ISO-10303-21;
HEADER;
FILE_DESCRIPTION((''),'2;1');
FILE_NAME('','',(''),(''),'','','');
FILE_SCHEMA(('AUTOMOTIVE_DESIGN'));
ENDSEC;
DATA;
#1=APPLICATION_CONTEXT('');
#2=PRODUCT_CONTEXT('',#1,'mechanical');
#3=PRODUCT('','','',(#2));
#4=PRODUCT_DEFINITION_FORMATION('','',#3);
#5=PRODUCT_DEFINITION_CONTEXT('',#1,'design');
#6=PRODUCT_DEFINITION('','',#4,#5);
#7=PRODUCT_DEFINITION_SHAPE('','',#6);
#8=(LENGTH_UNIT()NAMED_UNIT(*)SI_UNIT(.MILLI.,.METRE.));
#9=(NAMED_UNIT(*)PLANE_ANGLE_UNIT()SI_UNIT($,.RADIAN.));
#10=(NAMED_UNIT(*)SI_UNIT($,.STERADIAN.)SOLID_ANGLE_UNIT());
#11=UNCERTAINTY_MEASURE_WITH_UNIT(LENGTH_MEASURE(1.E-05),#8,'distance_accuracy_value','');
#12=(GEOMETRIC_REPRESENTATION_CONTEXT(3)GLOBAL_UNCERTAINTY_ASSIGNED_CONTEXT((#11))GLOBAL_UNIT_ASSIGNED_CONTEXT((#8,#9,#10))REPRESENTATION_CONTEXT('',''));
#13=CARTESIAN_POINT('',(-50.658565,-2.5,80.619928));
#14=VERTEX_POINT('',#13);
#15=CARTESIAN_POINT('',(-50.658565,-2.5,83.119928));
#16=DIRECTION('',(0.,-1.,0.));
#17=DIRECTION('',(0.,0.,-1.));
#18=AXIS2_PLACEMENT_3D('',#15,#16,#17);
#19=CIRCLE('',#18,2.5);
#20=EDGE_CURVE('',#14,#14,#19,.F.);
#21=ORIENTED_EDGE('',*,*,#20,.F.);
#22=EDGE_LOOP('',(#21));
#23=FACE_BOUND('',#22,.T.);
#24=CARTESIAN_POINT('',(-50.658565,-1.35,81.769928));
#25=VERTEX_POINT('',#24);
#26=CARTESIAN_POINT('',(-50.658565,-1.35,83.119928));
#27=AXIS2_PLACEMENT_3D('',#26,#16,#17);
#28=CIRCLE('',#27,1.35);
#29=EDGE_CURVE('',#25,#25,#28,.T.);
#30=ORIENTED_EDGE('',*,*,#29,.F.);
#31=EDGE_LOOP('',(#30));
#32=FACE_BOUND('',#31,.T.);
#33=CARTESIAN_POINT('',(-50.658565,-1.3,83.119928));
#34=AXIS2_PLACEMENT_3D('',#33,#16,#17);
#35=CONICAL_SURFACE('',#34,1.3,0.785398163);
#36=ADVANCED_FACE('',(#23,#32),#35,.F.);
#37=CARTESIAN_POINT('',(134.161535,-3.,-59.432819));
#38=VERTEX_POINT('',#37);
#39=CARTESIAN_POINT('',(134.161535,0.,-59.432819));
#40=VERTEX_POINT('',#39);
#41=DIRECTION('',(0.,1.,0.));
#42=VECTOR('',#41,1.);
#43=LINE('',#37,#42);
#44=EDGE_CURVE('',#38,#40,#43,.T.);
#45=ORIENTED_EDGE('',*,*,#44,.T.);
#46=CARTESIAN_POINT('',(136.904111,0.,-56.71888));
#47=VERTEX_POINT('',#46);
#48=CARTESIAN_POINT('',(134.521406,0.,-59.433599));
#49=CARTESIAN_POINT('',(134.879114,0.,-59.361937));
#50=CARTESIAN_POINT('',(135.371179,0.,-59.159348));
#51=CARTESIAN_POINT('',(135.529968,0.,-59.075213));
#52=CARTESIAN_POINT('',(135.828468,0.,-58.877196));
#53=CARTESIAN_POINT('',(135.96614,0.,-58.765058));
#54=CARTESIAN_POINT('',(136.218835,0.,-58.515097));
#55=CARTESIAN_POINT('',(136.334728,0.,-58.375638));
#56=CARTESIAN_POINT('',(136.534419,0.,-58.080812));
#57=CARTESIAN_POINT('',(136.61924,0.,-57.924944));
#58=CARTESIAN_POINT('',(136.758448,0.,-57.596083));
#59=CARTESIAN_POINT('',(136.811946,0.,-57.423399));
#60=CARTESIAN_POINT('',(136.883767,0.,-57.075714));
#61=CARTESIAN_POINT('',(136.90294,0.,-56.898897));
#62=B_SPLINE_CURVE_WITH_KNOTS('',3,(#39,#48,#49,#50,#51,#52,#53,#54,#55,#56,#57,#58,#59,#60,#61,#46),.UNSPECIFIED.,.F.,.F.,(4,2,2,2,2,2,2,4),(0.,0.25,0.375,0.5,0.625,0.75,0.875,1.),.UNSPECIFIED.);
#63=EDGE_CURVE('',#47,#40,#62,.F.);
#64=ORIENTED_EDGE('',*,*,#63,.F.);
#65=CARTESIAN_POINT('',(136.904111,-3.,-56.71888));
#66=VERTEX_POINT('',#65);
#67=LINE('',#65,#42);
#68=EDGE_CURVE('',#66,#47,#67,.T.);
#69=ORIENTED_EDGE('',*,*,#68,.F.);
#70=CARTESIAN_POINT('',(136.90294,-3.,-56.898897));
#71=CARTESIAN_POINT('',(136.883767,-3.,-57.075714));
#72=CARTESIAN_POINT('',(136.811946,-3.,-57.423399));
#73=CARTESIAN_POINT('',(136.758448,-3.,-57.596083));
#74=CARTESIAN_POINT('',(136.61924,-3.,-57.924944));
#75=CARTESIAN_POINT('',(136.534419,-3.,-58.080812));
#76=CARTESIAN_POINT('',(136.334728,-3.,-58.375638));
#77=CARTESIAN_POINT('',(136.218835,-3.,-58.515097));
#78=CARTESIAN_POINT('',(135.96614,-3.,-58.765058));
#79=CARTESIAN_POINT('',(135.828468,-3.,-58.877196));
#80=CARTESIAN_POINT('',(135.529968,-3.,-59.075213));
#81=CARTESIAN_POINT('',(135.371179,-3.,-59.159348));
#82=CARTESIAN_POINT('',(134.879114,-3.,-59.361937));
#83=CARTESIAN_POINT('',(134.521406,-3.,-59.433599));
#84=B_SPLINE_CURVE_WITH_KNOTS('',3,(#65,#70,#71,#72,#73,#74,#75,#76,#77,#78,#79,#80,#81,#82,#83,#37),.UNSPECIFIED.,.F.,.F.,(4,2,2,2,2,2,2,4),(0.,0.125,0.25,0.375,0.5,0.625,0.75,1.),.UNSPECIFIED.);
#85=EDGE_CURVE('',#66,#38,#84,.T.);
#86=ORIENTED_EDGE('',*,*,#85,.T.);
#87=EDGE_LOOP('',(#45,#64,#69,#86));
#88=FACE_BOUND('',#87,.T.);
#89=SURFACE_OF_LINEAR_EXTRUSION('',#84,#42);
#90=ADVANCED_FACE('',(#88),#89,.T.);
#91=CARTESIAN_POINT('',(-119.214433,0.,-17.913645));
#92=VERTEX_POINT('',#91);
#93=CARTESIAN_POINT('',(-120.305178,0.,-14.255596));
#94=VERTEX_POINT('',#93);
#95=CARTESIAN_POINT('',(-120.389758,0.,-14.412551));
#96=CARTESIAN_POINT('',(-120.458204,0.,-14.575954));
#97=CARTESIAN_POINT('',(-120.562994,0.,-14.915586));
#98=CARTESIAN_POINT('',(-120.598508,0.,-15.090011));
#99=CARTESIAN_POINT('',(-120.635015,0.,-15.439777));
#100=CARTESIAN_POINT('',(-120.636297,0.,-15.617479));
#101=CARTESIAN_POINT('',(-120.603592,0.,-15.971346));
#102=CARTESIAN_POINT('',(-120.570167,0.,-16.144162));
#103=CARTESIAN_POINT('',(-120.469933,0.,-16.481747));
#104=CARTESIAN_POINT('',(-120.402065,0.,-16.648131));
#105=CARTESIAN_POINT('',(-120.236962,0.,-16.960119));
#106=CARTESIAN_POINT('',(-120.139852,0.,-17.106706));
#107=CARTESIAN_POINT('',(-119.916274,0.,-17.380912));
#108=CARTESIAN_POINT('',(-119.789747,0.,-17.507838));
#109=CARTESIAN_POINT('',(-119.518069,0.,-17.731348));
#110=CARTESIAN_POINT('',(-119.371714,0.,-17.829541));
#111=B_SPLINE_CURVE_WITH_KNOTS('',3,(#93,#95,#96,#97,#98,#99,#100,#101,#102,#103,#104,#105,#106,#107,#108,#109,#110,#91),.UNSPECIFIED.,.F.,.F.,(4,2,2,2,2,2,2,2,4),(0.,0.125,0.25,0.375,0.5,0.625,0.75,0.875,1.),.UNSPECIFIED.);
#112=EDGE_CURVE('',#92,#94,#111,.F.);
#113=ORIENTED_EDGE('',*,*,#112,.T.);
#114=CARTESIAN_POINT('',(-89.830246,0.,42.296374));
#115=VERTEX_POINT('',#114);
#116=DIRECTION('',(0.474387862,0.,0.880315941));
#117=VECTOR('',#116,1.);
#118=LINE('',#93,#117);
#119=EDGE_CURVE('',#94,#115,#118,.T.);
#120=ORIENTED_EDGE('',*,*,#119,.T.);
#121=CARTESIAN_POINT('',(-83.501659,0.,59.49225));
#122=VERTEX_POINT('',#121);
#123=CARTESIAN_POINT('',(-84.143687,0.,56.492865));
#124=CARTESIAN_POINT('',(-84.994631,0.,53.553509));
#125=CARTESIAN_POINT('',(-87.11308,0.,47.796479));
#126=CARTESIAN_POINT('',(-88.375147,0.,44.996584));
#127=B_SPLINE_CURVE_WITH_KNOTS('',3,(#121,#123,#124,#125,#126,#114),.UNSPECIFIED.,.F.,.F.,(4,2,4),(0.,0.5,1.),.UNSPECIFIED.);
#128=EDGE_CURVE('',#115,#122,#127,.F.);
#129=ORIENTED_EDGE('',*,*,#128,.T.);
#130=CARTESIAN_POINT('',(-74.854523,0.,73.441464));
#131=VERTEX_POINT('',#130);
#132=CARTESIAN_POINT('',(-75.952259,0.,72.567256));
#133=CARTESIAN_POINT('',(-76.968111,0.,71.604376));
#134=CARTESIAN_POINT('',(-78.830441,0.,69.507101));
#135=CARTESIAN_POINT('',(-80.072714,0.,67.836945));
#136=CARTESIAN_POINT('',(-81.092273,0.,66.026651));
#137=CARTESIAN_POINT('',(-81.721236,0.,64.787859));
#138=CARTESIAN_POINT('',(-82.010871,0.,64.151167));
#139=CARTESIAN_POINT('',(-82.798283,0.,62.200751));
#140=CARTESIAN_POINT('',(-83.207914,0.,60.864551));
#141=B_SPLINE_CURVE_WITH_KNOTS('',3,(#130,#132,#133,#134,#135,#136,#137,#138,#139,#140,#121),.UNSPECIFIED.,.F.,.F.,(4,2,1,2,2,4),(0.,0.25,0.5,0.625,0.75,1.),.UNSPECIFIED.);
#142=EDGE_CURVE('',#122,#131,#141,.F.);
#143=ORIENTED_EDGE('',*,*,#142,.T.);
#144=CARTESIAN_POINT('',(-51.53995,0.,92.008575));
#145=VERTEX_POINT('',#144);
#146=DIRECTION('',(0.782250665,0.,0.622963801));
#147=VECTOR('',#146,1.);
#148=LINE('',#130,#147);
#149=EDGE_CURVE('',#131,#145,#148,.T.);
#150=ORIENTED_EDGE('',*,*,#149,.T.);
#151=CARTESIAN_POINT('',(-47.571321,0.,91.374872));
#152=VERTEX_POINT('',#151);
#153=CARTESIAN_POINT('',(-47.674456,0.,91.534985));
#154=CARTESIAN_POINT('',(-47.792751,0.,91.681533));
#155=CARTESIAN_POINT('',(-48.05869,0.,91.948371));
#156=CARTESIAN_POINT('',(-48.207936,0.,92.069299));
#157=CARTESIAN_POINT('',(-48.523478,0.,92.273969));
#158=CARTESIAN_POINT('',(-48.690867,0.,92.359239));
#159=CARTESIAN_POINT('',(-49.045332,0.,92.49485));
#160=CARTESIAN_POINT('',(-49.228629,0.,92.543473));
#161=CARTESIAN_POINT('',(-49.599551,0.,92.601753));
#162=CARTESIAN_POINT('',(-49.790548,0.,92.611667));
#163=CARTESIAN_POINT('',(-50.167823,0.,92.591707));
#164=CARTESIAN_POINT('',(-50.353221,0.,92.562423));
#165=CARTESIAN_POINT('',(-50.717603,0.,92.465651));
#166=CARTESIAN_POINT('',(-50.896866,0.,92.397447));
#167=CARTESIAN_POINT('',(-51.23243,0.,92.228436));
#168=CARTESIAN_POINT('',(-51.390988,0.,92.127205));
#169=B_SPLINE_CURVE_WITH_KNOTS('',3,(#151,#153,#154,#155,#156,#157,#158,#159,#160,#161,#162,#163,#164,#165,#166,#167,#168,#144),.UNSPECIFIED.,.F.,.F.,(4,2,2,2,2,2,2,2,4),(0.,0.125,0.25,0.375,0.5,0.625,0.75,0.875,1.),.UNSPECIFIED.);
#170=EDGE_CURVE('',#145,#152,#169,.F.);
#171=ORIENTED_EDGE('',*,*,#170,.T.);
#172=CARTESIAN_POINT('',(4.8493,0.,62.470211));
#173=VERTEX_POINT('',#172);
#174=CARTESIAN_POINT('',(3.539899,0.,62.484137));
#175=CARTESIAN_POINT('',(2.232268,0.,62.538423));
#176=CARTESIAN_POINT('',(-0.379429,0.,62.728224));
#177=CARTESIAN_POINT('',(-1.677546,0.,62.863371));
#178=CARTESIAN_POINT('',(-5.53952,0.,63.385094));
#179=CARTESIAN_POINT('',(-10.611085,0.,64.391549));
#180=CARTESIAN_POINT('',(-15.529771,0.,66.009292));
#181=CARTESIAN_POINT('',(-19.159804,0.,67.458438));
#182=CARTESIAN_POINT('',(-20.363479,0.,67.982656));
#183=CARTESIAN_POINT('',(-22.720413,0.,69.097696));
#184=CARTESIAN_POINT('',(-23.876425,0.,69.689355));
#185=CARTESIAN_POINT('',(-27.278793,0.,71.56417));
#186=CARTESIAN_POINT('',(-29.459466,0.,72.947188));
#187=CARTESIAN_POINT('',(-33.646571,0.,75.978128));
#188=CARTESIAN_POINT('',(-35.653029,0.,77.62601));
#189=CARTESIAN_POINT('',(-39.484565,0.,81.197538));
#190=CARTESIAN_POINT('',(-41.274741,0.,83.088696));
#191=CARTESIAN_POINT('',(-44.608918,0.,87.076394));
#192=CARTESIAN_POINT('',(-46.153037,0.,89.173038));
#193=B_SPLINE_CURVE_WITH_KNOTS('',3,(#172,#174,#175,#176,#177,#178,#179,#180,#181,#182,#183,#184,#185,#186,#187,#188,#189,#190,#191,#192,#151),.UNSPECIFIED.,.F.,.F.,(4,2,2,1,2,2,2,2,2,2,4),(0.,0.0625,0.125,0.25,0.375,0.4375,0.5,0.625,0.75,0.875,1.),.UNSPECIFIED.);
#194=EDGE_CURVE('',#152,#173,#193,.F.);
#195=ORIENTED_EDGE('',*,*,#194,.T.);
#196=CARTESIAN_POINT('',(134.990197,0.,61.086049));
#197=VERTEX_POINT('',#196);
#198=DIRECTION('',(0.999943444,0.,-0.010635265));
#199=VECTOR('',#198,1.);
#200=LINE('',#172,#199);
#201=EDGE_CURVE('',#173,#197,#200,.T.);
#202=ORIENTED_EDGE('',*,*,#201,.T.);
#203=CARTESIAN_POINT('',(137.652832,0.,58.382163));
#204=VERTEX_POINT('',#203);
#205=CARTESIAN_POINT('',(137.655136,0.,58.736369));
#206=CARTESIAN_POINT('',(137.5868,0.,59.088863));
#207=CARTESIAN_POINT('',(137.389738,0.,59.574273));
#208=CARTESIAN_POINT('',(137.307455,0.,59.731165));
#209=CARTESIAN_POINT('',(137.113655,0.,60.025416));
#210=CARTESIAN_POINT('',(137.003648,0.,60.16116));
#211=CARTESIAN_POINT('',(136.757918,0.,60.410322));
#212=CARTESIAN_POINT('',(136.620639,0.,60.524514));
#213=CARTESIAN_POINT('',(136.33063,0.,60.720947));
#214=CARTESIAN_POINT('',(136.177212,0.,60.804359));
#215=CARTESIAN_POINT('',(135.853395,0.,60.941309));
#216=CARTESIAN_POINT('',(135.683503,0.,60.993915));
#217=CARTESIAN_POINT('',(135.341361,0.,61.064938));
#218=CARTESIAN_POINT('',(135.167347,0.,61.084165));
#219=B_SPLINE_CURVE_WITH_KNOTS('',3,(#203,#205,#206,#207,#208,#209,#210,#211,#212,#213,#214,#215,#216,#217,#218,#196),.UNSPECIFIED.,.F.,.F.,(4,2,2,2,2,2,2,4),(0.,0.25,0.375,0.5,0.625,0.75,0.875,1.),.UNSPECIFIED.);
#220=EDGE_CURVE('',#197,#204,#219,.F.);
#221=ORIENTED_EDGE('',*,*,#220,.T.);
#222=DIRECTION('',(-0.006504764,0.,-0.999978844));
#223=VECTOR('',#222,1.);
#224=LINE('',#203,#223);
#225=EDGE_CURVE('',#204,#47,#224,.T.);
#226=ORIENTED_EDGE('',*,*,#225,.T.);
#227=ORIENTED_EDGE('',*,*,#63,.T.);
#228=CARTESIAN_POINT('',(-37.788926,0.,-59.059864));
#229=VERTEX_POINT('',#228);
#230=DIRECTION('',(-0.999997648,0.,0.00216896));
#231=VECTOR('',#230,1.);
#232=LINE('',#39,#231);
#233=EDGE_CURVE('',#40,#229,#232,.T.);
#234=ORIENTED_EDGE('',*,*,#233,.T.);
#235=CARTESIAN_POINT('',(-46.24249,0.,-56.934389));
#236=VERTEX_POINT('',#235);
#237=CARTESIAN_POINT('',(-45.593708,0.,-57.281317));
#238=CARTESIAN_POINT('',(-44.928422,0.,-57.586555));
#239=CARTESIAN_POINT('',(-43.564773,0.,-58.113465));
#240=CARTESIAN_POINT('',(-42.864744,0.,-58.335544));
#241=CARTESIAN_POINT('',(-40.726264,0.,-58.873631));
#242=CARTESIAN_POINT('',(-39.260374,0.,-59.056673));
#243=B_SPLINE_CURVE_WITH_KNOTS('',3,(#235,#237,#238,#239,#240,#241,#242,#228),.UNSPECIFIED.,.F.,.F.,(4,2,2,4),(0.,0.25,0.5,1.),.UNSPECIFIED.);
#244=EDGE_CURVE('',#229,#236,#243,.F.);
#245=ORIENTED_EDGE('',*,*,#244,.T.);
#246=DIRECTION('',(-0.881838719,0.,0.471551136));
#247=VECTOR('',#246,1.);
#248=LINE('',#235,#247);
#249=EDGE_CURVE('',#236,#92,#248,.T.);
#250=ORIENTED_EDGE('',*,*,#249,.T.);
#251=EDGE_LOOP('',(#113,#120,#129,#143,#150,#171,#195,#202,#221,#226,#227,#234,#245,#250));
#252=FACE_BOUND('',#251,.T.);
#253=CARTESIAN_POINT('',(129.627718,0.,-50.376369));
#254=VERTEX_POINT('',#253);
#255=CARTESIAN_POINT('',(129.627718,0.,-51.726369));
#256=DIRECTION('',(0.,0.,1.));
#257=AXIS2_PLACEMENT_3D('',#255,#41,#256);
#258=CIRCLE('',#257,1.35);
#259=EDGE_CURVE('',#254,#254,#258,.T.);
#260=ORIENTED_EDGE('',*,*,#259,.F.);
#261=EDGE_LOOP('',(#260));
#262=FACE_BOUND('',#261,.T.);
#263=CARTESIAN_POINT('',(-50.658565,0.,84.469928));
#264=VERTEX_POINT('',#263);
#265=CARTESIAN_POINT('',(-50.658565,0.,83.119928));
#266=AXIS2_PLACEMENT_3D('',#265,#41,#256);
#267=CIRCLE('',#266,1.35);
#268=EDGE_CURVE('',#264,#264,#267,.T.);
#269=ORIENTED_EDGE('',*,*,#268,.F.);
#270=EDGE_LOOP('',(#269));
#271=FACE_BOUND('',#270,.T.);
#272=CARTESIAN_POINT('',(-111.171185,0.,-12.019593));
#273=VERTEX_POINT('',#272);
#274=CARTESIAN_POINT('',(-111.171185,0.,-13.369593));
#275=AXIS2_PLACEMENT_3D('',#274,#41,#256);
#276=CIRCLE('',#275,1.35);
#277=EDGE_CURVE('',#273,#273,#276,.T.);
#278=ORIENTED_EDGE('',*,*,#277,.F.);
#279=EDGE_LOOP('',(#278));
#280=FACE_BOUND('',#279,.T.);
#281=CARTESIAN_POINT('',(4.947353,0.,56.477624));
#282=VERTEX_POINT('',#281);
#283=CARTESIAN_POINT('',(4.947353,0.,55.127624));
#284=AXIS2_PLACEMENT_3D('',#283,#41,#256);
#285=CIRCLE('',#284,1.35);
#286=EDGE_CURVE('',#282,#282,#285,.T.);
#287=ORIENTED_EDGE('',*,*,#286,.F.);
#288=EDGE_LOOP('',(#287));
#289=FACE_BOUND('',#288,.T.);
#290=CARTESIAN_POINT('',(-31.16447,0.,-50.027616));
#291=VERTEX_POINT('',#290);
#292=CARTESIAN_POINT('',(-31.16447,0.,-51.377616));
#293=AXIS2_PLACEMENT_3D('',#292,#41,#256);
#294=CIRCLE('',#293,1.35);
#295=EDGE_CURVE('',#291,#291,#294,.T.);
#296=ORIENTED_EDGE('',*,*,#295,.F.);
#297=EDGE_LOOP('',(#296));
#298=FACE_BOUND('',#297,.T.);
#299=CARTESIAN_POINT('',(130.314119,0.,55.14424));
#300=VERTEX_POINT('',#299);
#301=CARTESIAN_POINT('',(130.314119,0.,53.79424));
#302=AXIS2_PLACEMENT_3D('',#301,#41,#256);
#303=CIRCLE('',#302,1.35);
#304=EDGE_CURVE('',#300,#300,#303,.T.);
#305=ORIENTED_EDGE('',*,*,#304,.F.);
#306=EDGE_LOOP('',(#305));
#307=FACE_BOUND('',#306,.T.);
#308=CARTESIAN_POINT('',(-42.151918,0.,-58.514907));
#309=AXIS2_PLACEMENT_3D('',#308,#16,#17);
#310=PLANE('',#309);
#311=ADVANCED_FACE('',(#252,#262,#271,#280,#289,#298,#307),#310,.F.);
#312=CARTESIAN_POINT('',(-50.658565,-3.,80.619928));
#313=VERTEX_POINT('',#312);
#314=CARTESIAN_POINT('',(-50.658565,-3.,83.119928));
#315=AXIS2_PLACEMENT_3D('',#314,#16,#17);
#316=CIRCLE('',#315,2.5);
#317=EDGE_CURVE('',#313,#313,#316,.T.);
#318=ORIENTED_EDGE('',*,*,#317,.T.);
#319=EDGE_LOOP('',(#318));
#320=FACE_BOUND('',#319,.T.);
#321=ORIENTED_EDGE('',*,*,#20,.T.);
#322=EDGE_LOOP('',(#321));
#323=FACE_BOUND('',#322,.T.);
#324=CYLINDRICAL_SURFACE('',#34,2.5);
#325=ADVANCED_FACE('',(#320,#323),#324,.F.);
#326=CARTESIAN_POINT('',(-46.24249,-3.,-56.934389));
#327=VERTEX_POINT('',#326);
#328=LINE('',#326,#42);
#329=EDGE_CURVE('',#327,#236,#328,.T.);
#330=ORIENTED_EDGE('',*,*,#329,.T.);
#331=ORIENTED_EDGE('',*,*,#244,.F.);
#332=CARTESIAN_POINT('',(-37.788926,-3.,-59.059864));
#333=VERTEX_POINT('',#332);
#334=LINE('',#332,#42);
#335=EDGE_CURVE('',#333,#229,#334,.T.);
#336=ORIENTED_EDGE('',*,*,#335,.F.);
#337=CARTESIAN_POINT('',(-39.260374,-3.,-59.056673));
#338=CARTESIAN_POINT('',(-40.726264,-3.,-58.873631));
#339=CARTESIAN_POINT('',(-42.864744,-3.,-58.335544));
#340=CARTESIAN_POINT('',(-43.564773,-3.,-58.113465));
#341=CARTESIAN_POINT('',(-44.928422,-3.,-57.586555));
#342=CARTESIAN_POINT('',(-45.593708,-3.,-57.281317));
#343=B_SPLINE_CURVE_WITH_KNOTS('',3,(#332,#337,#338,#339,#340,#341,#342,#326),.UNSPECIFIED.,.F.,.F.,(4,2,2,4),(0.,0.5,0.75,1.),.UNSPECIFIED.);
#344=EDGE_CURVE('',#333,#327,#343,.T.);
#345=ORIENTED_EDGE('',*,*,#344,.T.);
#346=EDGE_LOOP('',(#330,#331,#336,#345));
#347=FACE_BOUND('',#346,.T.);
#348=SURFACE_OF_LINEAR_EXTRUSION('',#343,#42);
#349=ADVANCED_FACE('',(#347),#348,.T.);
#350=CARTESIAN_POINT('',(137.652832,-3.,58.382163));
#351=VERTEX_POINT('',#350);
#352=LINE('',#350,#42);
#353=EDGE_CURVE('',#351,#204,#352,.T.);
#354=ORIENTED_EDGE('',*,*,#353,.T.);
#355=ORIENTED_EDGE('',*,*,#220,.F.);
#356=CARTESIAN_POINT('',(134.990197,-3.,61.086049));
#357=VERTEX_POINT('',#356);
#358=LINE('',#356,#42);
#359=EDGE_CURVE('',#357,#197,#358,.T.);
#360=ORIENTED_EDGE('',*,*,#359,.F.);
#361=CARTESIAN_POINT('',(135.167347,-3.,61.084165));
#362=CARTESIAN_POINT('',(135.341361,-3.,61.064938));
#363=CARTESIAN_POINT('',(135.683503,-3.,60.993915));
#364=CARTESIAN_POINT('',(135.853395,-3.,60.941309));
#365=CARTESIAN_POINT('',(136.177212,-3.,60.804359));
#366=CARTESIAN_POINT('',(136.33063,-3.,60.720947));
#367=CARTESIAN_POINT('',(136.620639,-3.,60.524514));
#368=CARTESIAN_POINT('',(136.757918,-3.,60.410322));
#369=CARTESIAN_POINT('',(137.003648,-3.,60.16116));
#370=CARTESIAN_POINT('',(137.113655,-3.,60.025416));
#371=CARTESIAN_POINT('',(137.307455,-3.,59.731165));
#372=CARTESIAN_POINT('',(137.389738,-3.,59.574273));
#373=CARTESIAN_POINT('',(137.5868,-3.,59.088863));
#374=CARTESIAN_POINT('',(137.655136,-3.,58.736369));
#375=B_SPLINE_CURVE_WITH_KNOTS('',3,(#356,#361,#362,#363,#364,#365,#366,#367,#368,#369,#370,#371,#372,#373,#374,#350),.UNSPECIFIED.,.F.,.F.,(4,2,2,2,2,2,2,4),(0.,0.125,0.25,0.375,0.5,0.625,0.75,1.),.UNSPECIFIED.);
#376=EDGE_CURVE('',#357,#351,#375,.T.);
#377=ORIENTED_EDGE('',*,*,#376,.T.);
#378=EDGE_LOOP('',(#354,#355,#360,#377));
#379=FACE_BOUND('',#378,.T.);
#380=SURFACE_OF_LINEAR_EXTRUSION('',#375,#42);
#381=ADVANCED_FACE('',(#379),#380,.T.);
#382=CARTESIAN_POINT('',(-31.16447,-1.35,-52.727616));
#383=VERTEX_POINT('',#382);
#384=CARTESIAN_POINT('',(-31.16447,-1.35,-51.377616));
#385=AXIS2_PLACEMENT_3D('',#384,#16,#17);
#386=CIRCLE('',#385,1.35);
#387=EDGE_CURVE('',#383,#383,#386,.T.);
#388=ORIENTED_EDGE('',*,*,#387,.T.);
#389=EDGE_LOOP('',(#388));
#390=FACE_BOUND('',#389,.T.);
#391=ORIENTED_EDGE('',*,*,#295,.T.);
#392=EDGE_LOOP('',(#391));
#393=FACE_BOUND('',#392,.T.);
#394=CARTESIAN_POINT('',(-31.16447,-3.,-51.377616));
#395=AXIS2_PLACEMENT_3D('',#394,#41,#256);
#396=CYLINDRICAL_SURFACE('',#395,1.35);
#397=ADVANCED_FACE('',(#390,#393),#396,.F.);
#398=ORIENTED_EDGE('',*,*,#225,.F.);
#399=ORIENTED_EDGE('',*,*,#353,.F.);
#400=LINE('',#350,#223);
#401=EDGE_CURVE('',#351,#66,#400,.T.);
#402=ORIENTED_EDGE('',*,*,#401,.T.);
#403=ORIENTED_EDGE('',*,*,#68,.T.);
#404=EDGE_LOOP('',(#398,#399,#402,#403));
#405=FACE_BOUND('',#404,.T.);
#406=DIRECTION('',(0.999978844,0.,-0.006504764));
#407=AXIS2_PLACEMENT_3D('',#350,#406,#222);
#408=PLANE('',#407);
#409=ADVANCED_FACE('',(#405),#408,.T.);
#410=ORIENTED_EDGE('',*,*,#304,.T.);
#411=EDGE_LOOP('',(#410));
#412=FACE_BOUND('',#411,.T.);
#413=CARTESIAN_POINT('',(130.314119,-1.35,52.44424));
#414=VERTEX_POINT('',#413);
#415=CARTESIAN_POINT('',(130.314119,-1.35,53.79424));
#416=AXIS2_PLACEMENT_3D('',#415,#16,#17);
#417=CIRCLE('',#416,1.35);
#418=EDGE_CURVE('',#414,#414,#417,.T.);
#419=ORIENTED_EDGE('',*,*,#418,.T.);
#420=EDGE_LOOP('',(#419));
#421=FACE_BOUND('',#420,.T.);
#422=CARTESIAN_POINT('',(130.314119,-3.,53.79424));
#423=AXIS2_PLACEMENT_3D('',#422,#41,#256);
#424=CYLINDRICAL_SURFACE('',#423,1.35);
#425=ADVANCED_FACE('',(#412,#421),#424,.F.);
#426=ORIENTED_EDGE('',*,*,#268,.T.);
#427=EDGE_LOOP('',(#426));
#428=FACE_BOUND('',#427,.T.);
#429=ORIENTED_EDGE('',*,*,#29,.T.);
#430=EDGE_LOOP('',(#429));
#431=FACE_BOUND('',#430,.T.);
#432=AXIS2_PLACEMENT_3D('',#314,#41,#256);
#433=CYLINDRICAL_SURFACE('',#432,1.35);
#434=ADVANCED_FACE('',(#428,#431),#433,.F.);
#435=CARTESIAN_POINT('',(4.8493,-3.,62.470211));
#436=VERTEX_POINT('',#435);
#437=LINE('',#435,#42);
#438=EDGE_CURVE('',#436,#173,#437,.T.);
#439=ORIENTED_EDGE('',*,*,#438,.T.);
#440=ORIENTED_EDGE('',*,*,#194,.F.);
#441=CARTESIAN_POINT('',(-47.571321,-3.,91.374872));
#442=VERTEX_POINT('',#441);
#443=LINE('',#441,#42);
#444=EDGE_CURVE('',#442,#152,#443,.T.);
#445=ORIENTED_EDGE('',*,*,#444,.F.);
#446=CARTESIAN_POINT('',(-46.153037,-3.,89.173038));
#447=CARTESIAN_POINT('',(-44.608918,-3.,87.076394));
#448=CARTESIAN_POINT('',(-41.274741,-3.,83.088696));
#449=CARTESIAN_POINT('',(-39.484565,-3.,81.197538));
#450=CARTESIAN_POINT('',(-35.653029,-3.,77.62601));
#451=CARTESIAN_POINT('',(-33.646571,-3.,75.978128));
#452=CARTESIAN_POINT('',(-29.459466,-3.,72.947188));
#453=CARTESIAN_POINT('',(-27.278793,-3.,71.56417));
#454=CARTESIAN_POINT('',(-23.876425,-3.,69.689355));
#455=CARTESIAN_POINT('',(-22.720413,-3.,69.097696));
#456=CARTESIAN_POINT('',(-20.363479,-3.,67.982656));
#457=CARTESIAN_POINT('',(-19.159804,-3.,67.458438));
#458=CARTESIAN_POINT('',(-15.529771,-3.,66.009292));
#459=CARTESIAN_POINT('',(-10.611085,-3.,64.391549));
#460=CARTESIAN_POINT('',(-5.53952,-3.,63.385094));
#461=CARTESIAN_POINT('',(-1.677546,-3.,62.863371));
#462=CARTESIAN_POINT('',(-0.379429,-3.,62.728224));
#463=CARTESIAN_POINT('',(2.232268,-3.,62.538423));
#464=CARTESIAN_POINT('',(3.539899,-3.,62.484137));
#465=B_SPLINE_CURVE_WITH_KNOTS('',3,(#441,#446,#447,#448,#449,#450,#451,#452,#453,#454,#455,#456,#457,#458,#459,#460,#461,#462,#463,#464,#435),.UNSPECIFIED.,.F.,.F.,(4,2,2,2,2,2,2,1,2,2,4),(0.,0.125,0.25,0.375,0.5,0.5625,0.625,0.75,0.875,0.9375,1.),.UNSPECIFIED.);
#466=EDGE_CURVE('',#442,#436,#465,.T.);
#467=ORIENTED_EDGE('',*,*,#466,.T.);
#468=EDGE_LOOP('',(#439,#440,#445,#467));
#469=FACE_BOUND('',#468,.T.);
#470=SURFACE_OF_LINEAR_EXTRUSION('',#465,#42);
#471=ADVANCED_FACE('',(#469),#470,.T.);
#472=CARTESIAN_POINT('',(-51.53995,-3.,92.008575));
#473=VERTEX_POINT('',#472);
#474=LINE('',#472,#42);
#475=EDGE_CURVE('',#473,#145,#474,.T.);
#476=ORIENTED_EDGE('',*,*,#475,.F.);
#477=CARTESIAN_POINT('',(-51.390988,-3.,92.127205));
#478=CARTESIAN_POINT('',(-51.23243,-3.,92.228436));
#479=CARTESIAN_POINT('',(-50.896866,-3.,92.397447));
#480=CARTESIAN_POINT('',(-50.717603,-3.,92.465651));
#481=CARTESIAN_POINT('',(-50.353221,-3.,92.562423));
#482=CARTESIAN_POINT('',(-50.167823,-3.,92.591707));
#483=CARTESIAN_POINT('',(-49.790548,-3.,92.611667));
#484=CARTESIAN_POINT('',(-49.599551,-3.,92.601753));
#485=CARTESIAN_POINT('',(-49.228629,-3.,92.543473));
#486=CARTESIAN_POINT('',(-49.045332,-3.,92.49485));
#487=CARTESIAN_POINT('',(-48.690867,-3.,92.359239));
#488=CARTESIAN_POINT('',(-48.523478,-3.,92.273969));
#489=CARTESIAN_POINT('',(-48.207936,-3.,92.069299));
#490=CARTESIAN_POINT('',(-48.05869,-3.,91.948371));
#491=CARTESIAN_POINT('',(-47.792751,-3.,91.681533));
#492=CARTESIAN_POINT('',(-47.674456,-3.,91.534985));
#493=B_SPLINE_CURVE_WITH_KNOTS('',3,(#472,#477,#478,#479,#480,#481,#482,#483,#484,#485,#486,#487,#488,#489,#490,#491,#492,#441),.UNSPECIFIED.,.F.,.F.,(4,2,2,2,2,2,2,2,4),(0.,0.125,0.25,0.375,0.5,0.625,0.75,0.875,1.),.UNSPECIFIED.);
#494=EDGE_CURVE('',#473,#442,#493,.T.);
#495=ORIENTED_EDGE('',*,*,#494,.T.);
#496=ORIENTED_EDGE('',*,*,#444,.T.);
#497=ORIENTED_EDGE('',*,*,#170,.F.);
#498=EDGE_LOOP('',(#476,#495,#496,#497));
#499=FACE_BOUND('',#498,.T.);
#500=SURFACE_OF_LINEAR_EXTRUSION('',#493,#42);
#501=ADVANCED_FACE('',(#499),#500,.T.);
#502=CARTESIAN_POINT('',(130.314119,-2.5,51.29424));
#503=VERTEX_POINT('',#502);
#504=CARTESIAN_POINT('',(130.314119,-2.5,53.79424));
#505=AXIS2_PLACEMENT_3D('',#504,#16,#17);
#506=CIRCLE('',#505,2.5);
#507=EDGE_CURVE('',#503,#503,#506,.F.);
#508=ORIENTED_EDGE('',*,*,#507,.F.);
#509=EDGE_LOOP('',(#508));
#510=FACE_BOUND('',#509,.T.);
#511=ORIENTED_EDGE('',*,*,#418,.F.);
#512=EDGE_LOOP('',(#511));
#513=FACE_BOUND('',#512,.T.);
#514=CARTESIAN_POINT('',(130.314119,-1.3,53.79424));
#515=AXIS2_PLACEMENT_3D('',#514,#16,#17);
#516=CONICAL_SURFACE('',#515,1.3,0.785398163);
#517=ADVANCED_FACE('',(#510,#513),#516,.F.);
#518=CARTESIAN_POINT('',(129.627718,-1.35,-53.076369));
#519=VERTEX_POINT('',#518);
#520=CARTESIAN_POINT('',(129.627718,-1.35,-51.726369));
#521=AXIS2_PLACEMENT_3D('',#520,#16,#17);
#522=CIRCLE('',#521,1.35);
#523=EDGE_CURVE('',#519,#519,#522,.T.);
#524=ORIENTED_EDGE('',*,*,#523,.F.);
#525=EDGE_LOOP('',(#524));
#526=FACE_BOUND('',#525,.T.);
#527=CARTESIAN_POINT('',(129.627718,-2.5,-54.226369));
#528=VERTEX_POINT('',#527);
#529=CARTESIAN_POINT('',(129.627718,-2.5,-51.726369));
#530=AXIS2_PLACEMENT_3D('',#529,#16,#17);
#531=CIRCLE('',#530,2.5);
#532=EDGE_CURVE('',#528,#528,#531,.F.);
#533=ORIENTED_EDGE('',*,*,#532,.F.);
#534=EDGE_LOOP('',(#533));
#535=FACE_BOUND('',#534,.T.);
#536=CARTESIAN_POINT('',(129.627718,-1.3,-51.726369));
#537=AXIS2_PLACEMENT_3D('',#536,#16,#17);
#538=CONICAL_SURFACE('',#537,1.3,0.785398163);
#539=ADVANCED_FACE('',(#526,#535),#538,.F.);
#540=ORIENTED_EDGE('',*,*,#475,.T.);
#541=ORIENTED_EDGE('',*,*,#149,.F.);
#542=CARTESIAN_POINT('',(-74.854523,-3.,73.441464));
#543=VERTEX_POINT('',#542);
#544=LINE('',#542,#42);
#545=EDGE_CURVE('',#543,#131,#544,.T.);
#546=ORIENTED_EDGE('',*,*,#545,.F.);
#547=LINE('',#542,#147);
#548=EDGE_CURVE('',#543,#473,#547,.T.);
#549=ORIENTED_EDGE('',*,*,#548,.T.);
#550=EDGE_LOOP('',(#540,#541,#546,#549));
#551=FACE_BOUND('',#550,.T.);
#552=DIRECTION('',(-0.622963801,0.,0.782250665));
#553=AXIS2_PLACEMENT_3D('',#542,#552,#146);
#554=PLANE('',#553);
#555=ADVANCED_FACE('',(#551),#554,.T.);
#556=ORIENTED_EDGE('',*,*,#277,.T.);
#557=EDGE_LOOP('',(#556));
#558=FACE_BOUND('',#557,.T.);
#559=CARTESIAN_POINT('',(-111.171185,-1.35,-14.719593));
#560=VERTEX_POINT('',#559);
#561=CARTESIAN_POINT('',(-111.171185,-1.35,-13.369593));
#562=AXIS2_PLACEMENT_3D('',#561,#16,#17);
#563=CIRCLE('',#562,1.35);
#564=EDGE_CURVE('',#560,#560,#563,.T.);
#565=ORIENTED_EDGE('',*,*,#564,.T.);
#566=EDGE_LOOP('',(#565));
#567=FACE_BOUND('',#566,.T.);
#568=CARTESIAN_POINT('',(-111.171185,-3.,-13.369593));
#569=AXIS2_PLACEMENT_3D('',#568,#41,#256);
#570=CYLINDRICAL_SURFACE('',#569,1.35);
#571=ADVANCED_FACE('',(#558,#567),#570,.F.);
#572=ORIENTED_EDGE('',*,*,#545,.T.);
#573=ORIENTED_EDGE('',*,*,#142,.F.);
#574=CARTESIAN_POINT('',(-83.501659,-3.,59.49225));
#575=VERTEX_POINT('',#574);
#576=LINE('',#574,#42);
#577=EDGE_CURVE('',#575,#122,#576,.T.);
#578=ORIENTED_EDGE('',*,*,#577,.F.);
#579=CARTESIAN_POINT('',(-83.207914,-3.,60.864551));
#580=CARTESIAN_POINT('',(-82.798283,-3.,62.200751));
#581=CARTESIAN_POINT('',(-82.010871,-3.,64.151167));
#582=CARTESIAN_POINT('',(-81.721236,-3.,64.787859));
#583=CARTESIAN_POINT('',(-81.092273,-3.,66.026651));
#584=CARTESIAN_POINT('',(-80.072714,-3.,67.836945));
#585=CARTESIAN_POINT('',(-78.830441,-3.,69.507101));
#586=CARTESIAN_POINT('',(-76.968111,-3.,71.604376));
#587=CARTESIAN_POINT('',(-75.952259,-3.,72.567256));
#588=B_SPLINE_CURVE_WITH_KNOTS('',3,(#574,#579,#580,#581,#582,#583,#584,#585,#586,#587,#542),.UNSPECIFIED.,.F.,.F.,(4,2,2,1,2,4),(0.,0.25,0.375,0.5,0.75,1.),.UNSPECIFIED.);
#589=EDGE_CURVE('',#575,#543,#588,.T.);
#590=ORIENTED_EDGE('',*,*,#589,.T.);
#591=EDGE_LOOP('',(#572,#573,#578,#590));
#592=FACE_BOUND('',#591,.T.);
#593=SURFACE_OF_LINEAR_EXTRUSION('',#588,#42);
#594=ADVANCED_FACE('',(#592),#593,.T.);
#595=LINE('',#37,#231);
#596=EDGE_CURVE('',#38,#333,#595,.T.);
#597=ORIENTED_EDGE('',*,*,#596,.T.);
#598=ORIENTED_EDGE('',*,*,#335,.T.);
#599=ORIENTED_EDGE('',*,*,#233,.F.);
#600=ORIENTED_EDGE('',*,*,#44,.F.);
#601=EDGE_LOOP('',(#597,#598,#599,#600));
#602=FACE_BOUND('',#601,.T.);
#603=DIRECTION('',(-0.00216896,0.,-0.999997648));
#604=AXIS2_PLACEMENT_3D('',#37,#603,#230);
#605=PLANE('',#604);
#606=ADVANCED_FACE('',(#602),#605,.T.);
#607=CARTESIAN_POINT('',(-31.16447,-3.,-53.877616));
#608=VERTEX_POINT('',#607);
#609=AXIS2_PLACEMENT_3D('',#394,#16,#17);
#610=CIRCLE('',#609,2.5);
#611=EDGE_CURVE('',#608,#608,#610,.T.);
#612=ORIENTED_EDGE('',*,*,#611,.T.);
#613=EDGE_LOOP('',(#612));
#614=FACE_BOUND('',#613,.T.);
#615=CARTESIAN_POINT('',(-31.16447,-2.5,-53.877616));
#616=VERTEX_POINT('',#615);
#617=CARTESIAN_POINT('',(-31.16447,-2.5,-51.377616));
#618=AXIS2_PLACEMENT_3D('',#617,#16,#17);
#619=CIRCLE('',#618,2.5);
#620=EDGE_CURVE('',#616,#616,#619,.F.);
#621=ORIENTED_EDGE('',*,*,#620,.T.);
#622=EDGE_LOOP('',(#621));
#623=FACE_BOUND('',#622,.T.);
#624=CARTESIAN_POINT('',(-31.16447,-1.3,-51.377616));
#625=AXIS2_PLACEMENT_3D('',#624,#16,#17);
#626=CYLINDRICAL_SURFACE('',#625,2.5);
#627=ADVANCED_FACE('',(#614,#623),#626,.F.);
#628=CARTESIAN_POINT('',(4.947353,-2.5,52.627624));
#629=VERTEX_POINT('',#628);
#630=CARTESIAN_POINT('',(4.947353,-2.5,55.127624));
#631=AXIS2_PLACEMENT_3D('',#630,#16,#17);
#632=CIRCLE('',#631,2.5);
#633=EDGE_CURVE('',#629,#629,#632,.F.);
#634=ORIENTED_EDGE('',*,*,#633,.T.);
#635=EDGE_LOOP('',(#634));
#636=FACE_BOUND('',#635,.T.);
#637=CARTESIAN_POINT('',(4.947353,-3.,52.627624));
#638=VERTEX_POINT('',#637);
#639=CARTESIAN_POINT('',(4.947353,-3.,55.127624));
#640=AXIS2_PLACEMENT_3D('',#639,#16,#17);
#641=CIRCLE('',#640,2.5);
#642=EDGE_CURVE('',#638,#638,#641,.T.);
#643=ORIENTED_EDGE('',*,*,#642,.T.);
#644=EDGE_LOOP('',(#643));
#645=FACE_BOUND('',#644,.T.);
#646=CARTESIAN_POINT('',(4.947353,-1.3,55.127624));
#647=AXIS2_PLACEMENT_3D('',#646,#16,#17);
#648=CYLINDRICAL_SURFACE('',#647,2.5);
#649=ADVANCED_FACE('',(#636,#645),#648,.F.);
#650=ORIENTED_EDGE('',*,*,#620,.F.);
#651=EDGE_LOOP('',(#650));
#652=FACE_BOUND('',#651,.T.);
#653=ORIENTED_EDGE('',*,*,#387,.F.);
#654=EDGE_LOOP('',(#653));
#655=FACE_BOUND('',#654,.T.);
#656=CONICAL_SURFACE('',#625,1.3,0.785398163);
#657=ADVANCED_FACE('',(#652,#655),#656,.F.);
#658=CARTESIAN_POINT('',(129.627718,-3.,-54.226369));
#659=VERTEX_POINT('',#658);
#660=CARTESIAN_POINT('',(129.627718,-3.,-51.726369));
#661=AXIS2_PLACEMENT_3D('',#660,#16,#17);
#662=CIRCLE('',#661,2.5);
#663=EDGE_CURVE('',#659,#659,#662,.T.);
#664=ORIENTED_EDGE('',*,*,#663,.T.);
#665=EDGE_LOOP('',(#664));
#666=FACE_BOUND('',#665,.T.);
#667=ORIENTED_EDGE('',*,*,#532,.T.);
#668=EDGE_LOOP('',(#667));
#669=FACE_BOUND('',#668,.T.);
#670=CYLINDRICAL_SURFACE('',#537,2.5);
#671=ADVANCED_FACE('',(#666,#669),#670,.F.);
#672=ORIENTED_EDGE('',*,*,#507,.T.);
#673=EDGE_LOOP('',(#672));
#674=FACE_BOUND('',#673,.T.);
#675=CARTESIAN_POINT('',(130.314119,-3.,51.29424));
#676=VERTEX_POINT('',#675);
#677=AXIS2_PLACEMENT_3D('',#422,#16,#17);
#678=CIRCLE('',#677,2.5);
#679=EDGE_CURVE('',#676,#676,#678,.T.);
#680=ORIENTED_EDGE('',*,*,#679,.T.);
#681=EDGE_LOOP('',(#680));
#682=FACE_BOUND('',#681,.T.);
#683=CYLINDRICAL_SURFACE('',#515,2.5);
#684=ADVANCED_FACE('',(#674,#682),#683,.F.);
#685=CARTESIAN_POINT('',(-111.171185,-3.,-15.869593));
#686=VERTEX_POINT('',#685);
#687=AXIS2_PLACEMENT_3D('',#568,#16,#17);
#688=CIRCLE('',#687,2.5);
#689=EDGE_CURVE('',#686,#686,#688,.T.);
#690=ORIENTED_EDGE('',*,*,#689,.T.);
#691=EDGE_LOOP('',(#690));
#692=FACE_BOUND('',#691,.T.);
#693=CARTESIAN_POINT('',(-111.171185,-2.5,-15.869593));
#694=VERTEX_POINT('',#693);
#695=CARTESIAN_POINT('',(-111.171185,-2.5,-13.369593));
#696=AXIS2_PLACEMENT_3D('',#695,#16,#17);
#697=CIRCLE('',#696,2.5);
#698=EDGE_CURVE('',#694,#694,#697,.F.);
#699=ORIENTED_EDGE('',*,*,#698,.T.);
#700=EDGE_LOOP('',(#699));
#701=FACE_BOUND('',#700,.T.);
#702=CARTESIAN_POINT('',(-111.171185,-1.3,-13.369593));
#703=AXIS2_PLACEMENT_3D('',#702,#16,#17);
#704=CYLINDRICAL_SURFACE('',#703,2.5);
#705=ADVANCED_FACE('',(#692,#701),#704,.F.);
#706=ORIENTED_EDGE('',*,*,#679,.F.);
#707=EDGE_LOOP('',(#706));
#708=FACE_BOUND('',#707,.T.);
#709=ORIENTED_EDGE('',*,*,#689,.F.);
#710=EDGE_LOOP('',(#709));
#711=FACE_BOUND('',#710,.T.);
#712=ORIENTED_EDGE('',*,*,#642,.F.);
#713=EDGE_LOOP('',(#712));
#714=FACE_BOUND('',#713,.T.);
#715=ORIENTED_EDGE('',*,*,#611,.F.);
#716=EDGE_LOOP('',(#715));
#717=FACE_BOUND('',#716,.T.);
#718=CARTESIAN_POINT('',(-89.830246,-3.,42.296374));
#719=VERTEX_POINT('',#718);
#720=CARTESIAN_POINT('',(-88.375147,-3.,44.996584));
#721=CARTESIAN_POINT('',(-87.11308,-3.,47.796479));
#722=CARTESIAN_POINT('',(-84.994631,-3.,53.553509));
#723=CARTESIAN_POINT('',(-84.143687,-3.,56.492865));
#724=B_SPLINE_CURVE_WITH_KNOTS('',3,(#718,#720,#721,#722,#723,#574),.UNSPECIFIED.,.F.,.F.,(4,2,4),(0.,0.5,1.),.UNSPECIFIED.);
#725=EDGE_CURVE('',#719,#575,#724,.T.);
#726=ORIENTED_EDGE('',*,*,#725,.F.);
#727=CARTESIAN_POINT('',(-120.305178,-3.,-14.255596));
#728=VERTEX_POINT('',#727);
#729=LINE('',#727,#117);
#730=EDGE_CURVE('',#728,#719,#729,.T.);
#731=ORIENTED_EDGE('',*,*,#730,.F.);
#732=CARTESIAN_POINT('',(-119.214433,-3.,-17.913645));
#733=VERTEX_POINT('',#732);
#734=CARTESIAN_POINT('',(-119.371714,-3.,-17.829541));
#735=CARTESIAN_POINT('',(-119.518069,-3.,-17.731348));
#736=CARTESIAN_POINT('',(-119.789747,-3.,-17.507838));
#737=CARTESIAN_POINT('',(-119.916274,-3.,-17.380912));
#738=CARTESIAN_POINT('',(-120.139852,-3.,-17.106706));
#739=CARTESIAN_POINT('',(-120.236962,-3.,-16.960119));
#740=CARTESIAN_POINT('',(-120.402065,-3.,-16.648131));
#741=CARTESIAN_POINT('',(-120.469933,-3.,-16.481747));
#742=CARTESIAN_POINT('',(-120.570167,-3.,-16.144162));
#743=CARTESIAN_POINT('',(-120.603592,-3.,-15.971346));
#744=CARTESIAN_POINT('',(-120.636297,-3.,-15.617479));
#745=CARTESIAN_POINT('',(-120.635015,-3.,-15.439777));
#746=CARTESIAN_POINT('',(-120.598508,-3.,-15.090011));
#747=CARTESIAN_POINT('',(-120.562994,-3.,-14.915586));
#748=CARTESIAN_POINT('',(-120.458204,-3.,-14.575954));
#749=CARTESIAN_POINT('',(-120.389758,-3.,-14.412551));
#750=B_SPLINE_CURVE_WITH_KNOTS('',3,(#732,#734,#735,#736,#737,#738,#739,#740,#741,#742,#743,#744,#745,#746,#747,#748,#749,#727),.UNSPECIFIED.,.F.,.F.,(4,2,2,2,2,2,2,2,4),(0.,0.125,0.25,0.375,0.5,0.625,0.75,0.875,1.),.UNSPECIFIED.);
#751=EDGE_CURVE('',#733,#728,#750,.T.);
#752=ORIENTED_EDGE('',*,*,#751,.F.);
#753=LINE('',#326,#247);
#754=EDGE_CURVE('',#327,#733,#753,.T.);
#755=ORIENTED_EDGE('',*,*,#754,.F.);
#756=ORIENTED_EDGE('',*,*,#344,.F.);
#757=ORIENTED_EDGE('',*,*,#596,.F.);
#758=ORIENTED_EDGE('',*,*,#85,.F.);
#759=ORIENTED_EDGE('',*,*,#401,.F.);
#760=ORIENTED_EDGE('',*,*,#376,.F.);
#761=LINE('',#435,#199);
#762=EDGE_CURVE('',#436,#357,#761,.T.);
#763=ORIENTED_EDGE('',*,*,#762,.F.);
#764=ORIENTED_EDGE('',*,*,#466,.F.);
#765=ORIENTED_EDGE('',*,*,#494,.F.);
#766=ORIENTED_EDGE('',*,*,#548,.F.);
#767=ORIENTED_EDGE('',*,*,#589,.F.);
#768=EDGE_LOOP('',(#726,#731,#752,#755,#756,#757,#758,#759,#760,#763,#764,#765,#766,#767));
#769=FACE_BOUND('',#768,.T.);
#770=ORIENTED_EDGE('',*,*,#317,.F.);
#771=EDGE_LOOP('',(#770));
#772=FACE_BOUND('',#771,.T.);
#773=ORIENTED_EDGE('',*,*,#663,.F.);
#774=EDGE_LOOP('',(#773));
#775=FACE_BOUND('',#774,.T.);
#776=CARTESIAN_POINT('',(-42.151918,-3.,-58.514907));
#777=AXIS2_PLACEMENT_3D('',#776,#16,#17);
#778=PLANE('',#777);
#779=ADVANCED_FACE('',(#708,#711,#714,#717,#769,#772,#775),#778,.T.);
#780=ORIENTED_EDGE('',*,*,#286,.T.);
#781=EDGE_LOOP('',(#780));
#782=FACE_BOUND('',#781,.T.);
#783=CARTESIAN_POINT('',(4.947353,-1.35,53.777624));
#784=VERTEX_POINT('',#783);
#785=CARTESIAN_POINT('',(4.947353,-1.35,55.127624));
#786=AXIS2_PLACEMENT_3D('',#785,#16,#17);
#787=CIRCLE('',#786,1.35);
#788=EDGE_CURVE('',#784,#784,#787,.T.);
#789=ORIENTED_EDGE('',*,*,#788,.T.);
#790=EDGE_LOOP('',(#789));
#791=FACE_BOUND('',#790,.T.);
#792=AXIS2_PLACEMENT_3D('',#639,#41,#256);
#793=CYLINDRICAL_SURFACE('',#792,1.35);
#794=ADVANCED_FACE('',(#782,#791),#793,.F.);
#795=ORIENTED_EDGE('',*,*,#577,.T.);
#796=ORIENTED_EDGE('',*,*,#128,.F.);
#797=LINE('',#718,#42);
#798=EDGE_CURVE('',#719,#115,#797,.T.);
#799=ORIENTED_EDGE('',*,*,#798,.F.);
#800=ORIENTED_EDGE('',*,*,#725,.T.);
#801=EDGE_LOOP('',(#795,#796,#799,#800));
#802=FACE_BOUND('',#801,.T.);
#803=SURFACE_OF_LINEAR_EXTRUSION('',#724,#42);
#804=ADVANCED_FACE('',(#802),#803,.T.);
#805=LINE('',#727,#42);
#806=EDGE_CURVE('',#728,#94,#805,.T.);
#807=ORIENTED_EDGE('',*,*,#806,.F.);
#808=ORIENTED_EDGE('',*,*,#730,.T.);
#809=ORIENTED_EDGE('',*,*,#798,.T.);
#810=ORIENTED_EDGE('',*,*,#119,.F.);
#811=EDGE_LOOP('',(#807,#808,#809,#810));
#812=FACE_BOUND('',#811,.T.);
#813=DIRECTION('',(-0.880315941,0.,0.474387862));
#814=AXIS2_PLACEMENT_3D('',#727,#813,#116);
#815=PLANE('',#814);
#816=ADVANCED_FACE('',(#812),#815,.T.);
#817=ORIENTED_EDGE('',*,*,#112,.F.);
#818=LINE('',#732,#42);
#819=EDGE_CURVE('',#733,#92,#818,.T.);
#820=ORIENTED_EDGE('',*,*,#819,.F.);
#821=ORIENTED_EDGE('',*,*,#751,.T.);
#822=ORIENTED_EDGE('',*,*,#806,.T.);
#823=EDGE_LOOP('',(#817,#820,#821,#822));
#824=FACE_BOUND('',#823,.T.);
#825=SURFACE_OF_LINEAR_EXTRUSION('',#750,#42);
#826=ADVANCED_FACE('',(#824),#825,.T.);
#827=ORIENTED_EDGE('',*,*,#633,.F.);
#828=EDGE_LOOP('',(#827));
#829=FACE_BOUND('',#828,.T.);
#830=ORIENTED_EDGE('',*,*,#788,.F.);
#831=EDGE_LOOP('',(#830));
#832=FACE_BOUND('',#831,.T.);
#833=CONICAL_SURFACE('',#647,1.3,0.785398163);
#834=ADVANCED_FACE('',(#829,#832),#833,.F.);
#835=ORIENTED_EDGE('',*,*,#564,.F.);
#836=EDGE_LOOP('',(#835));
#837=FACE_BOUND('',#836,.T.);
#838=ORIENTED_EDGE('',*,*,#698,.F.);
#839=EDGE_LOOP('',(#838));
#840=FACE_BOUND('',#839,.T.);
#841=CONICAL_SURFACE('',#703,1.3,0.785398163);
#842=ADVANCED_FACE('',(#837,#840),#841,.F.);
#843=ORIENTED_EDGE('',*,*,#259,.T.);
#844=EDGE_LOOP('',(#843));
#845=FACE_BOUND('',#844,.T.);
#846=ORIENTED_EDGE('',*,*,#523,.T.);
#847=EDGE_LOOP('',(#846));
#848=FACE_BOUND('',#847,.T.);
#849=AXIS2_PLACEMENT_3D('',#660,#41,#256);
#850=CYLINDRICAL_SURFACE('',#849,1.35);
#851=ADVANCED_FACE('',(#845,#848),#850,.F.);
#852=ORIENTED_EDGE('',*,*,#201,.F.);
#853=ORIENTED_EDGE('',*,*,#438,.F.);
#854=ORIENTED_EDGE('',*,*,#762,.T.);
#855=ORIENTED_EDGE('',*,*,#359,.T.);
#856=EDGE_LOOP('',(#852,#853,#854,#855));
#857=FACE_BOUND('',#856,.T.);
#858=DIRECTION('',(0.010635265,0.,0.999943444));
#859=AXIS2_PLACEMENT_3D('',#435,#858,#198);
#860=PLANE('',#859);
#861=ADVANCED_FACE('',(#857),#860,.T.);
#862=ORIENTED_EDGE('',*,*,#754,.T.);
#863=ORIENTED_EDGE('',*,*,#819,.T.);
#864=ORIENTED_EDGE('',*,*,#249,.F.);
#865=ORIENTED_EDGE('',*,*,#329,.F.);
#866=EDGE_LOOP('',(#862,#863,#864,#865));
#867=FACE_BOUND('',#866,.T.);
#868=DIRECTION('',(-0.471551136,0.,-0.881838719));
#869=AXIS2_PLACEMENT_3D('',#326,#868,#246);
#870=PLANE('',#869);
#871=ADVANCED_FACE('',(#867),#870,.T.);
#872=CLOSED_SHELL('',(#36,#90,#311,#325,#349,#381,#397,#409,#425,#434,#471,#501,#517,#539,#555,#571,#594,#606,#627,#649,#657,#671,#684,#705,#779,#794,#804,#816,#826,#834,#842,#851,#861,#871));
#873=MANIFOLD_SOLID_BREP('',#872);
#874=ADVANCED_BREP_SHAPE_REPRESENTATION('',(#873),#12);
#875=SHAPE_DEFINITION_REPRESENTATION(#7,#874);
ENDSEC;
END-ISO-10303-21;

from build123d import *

# Parameters (mm, degrees)
SKETCH1_R           = 1.35
BOSS_EXTRUDE1_DEPTH = 3
SKETCH2_R           = 2.5
CUT_EXTRUDE1_DEPTH  = 1.7
CHAMFER1_SIZE       = 1.2


with BuildPart() as part:
    # Sketch1 → Boss-Extrude1 (new body)
    with BuildSketch(Plane(origin=(0, 0, 0), x_dir=(1, 0, 0), z_dir=(0, 1, 0))):
        with BuildLine():
            Line((134.161534911, 59.43281878), (-37.78892646, 59.059864213))
            add(Edge.make_bspline(
                [(-37.78892646, 59.059864213), (-39.260373987, 59.056672695), (-40.726264192, 58.873631016), (-42.864744181, 58.335544499), (-43.56477321, 58.113464931), (-44.928422176, 57.586554564), (-45.593707509, 57.281316649), (-46.242490458, 56.934388883)],
                knots=[0, 0, 0, 0, 0.5, 0.5, 0.75, 0.75, 1, 1, 1, 1], degree=3))
            Line((-46.242490458, 56.934388883), (-119.214433491, 17.913645156))
            add(Edge.make_bspline(
                [(-119.214433491, 17.913645156), (-119.371714153, 17.829541484), (-119.518068848, 17.731347507), (-119.789747392, 17.507837833), (-119.916274323, 17.380912308), (-120.139852202, 17.106706149), (-120.236961752, 16.960118582), (-120.402064762, 16.648131274), (-120.469932783, 16.481746722), (-120.570167022, 16.144162456), (-120.603591555, 15.971345529), (-120.63629684, 15.61747918), (-120.635015098, 15.439777034), (-120.598507798, 15.090011023), (-120.562994402, 14.91558609), (-120.458204018, 14.575953541), (-120.389758062, 14.412551149), (-120.305177563, 14.255596117)],
                knots=[0, 0, 0, 0, 0.125, 0.125, 0.25, 0.25, 0.375, 0.375, 0.5, 0.5, 0.625, 0.625, 0.75, 0.75, 0.875, 0.875, 1, 1, 1, 1], degree=3))
            Line((-120.305177563, 14.255596117), (-89.830246023, -42.296373733))
            add(Edge.make_bspline(
                [(-89.830246023, -42.296373733), (-88.375146858, -44.996584036), (-87.11307972, -47.796479497), (-84.994631409, -53.553509169), (-84.143686828, -56.492865486), (-83.501659246, -59.49224952)],
                knots=[0, 0, 0, 0, 0.5, 0.5, 1, 1, 1, 1], degree=3))
            add(Edge.make_bspline(
                [(-83.501659246, -59.49224952), (-83.207913745, -60.86455126), (-82.798283173, -62.200751268), (-82.010871212, -64.151167066), (-81.721235964, -64.787858992), (-81.092273153, -66.026650793), (-80.072714097, -67.836944856), (-78.830441112, -69.507100935), (-76.968111095, -71.604375976), (-75.952258591, -72.567256281), (-74.854523467, -73.441463587)],
                knots=[0, 0, 0, 0, 0.25, 0.25, 0.375, 0.375, 0.5, 0.75, 0.75, 1, 1, 1, 1], degree=3))
            Line((-74.854523467, -73.441463587), (-51.539950225, -92.008574916))
            add(Edge.make_bspline(
                [(-51.539950225, -92.008574916), (-51.390987712, -92.127204734), (-51.232429983, -92.228435853), (-50.896866499, -92.397446873), (-50.717603486, -92.465650862), (-50.353220614, -92.562423021), (-50.167823032, -92.591707222), (-49.790547653, -92.611667192), (-49.599550596, -92.601753163), (-49.228628709, -92.543472736), (-49.045331803, -92.494850179), (-48.690867071, -92.359239211), (-48.52347813, -92.273968718), (-48.207935535, -92.069298914), (-48.058689904, -91.948371285), (-47.792751324, -91.681532762), (-47.674455998, -91.534984666), (-47.571321486, -91.374872149)],
                knots=[0, 0, 0, 0, 0.125, 0.125, 0.25, 0.25, 0.375, 0.375, 0.5, 0.5, 0.625, 0.625, 0.75, 0.75, 0.875, 0.875, 1, 1, 1, 1], degree=3))
            add(Edge.make_bspline(
                [(-47.571321486, -91.374872149), (-46.153036919, -89.173037798), (-44.608917961, -87.076393648), (-41.274741201, -83.088695854), (-39.484564632, -81.197538353), (-35.653029438, -77.626010441), (-33.646571022, -75.978127616), (-29.459465947, -72.9471878), (-27.278793496, -71.564170023), (-23.876425351, -69.689354772), (-22.720413119, -69.097695924), (-20.363479447, -67.982655618), (-19.159804228, -67.458437514), (-15.529771039, -66.009292146), (-10.611085077, -64.391548948), (-5.539520445, -63.385094495), (-1.677546074, -62.863371081), (-0.379428844, -62.728223796), (2.232268288, -62.538422964), (3.539898616, -62.484137167), (4.849299501, -62.470210553)],
                knots=[0, 0, 0, 0, 0.125, 0.125, 0.25, 0.25, 0.375, 0.375, 0.5, 0.5, 0.5625, 0.5625, 0.625, 0.625, 0.75, 0.875, 0.875, 0.9375, 0.9375, 1, 1, 1, 1], degree=3))
            Line((4.849299501, -62.470210553), (134.990197336, -61.08604937))
            add(Edge.make_bspline(
                [(134.990197336, -61.08604937), (135.167346788, -61.084165224), (135.341361144, -61.064937541), (135.683502878, -60.993915065), (135.853395352, -60.941308848), (136.17721181, -60.80435926), (136.330630434, -60.720947254), (136.620639449, -60.524514457), (136.757918371, -60.410322016), (137.003647924, -60.161160095), (137.113655434, -60.025415528), (137.307455362, -59.731164559), (137.38973844, -59.574273341), (137.586799708, -59.088862557), (137.655136112, -58.736369262), (137.652832045, -58.382163441)],
                knots=[0, 0, 0, 0, 0.125, 0.125, 0.25, 0.25, 0.375, 0.375, 0.5, 0.5, 0.625, 0.625, 0.75, 0.75, 1, 1, 1, 1], degree=3))
            Line((137.652832045, -58.382163441), (136.904111112, 56.7188799))
            add(Edge.make_bspline(
                [(136.904111112, 56.7188799), (136.902940109, 56.898896811), (136.883766744, 57.075714075), (136.811945539, 57.42339902), (136.758448028, 57.596083274), (136.619240417, 57.924944469), (136.534418559, 58.080811621), (136.334727886, 58.375638017), (136.21883457, 58.51509664), (135.966139935, 58.765058133), (135.828467671, 58.877195989), (135.529967832, 59.07521276), (135.371179474, 59.159347789), (134.879114282, 59.361936915), (134.521405548, 59.433599309), (134.161534911, 59.43281878)],
                knots=[0, 0, 0, 0, 0.125, 0.125, 0.25, 0.25, 0.375, 0.375, 0.5, 0.5, 0.625, 0.625, 0.75, 0.75, 1, 1, 1, 1], degree=3))
        make_face()
        with Locations(Location((129.627717634, 51.726368816, 0), (0, 0, 270))):
            Circle(SKETCH1_R, mode=Mode.SUBTRACT)
        with Locations(Location((-31.164469896, 51.377616083, 0), (0, 0, 270))):
            Circle(SKETCH1_R, mode=Mode.SUBTRACT)
        with Locations(Location((-111.171184663, 13.369593003, 0), (0, 0, 270))):
            Circle(SKETCH1_R, mode=Mode.SUBTRACT)
        with Locations(Location((-50.65856493, -83.119927605, 0), (0, 0, 270))):
            Circle(SKETCH1_R, mode=Mode.SUBTRACT)
        with Locations(Location((4.947352904, -55.127624349, 0), (0, 0, 270))):
            Circle(SKETCH1_R, mode=Mode.SUBTRACT)
        with Locations(Location((130.314118933, -53.794240193, 0), (0, 0, 270))):
            Circle(SKETCH1_R, mode=Mode.SUBTRACT)
    extrude(amount=-BOSS_EXTRUDE1_DEPTH)

    # Sketch2 → Cut-Extrude1 (cut)
    with BuildSketch(Plane.XZ.offset(3)):
        with Locations(Location((-50.65856493, 83.119927605, 0), (0, 0, 270))):
            Circle(SKETCH2_R)
        with Locations(Location((4.947352904, 55.127624349, 0), (0, 0, 270))):
            Circle(SKETCH2_R)
        with Locations(Location((130.314118933, 53.794240193, 0), (0, 0, 270))):
            Circle(SKETCH2_R)
        with Locations(Location((129.627717634, -51.726368816, 0), (0, 0, 270))):
            Circle(SKETCH2_R)
        with Locations(Location((-31.164469896, -51.377616083, 0), (0, 0, 270))):
            Circle(SKETCH2_R)
        with Locations(Location((-111.171184663, -13.369593003, 0), (0, 0, 270))):
            Circle(SKETCH2_R)
    extrude(amount=-CUT_EXTRUDE1_DEPTH, mode=Mode.SUBTRACT)

    # Chamfer1
    # the kernel refuses this chamfer: 1.2 mm, written as the material it adds along each edge
    with BuildSketch(Plane(origin=(129.627717634, -1.3, -51.726368816), x_dir=(0, 0, -1), z_dir=(-1, 0, 0))) as chamfer1_piece_1_section:
        Polygon((2.5, CHAMFER1_SIZE), (2.5 - CHAMFER1_SIZE, 0), (2.5, 0), align=None)
    chamfer1_piece_1 = revolve(axis=Axis((129.627717634, -1.3, -51.726368816), (0, -1, 0)), mode=Mode.PRIVATE)
    chamfer1_piece_1 = chamfer1_piece_1 - Plane(origin=(129.627717634, -1.926520071, -51.726368816), x_dir=(0, 0, 1), z_dir=(0, 1, 0)) * Cylinder(1.35, 10, mode=Mode.PRIVATE)
    add(chamfer1_piece_1)
    with BuildSketch(Plane(origin=(130.314118933, -1.3, 53.794240193), x_dir=(0, 0, -1), z_dir=(-1, 0, 0))) as chamfer1_piece_2_section:
        Polygon((2.5, CHAMFER1_SIZE), (2.5 - CHAMFER1_SIZE, 0), (2.5, 0), align=None)
    chamfer1_piece_2 = revolve(axis=Axis((130.314118933, -1.3, 53.794240193), (0, -1, 0)), mode=Mode.PRIVATE)
    chamfer1_piece_2 = chamfer1_piece_2 - Plane(origin=(130.314118933, -1.926520071, 53.794240193), x_dir=(0, 0, 1), z_dir=(0, 1, 0)) * Cylinder(1.35, 10, mode=Mode.PRIVATE)
    add(chamfer1_piece_2)
    with BuildSketch(Plane(origin=(4.947352904, -1.3, 55.127624349), x_dir=(0, 0, -1), z_dir=(-1, 0, 0))) as chamfer1_piece_3_section:
        Polygon((2.5, CHAMFER1_SIZE), (2.5 - CHAMFER1_SIZE, 0), (2.5, 0), align=None)
    chamfer1_piece_3 = revolve(axis=Axis((4.947352904, -1.3, 55.127624349), (0, -1, 0)), mode=Mode.PRIVATE)
    chamfer1_piece_3 = chamfer1_piece_3 - Plane(origin=(4.947352904, -1.926520071, 55.127624349), x_dir=(0, 0, 1), z_dir=(0, 1, 0)) * Cylinder(1.35, 11, mode=Mode.PRIVATE)
    add(chamfer1_piece_3)
    with BuildSketch(Plane(origin=(-50.65856493, -1.3, 83.119927605), x_dir=(0, 0, -1), z_dir=(-1, 0, 0))) as chamfer1_piece_4_section:
        Polygon((2.5, CHAMFER1_SIZE), (2.5 - CHAMFER1_SIZE, 0), (2.5, 0), align=None)
    chamfer1_piece_4 = revolve(axis=Axis((-50.65856493, -1.3, 83.119927605), (0, -1, 0)), mode=Mode.PRIVATE)
    chamfer1_piece_4 = chamfer1_piece_4 - Plane(origin=(-50.65856493, -1.926520071, 83.119927605), x_dir=(0, 0, 1), z_dir=(0, 1, 0)) * Cylinder(1.35, 10, mode=Mode.PRIVATE)
    add(chamfer1_piece_4)
    with BuildSketch(Plane(origin=(-111.171184663, -1.3, -13.369593003), x_dir=(0, 0, -1), z_dir=(-1, 0, 0))) as chamfer1_piece_5_section:
        Polygon((2.5, CHAMFER1_SIZE), (2.5 - CHAMFER1_SIZE, 0), (2.5, 0), align=None)
    chamfer1_piece_5 = revolve(axis=Axis((-111.171184663, -1.3, -13.369593003), (0, -1, 0)), mode=Mode.PRIVATE)
    chamfer1_piece_5 = chamfer1_piece_5 - Plane(origin=(-111.171184663, -1.926520071, -13.369593003), x_dir=(0, 0, 1), z_dir=(0, 1, 0)) * Cylinder(1.35, 10, mode=Mode.PRIVATE)
    add(chamfer1_piece_5)
    with BuildSketch(Plane(origin=(-31.164469896, -1.3, -51.377616083), x_dir=(0, 0, -1), z_dir=(-1, 0, 0))) as chamfer1_piece_6_section:
        Polygon((2.5, CHAMFER1_SIZE), (2.5 - CHAMFER1_SIZE, 0), (2.5, 0), align=None)
    chamfer1_piece_6 = revolve(axis=Axis((-31.164469896, -1.3, -51.377616083), (0, -1, 0)), mode=Mode.PRIVATE)
    chamfer1_piece_6 = chamfer1_piece_6 - Plane(origin=(-31.164469896, -1.926520071, -51.377616083), x_dir=(0, 0, 1), z_dir=(0, 1, 0)) * Cylinder(1.35, 10, mode=Mode.PRIVATE)
    add(chamfer1_piece_6)


solid = part.part
